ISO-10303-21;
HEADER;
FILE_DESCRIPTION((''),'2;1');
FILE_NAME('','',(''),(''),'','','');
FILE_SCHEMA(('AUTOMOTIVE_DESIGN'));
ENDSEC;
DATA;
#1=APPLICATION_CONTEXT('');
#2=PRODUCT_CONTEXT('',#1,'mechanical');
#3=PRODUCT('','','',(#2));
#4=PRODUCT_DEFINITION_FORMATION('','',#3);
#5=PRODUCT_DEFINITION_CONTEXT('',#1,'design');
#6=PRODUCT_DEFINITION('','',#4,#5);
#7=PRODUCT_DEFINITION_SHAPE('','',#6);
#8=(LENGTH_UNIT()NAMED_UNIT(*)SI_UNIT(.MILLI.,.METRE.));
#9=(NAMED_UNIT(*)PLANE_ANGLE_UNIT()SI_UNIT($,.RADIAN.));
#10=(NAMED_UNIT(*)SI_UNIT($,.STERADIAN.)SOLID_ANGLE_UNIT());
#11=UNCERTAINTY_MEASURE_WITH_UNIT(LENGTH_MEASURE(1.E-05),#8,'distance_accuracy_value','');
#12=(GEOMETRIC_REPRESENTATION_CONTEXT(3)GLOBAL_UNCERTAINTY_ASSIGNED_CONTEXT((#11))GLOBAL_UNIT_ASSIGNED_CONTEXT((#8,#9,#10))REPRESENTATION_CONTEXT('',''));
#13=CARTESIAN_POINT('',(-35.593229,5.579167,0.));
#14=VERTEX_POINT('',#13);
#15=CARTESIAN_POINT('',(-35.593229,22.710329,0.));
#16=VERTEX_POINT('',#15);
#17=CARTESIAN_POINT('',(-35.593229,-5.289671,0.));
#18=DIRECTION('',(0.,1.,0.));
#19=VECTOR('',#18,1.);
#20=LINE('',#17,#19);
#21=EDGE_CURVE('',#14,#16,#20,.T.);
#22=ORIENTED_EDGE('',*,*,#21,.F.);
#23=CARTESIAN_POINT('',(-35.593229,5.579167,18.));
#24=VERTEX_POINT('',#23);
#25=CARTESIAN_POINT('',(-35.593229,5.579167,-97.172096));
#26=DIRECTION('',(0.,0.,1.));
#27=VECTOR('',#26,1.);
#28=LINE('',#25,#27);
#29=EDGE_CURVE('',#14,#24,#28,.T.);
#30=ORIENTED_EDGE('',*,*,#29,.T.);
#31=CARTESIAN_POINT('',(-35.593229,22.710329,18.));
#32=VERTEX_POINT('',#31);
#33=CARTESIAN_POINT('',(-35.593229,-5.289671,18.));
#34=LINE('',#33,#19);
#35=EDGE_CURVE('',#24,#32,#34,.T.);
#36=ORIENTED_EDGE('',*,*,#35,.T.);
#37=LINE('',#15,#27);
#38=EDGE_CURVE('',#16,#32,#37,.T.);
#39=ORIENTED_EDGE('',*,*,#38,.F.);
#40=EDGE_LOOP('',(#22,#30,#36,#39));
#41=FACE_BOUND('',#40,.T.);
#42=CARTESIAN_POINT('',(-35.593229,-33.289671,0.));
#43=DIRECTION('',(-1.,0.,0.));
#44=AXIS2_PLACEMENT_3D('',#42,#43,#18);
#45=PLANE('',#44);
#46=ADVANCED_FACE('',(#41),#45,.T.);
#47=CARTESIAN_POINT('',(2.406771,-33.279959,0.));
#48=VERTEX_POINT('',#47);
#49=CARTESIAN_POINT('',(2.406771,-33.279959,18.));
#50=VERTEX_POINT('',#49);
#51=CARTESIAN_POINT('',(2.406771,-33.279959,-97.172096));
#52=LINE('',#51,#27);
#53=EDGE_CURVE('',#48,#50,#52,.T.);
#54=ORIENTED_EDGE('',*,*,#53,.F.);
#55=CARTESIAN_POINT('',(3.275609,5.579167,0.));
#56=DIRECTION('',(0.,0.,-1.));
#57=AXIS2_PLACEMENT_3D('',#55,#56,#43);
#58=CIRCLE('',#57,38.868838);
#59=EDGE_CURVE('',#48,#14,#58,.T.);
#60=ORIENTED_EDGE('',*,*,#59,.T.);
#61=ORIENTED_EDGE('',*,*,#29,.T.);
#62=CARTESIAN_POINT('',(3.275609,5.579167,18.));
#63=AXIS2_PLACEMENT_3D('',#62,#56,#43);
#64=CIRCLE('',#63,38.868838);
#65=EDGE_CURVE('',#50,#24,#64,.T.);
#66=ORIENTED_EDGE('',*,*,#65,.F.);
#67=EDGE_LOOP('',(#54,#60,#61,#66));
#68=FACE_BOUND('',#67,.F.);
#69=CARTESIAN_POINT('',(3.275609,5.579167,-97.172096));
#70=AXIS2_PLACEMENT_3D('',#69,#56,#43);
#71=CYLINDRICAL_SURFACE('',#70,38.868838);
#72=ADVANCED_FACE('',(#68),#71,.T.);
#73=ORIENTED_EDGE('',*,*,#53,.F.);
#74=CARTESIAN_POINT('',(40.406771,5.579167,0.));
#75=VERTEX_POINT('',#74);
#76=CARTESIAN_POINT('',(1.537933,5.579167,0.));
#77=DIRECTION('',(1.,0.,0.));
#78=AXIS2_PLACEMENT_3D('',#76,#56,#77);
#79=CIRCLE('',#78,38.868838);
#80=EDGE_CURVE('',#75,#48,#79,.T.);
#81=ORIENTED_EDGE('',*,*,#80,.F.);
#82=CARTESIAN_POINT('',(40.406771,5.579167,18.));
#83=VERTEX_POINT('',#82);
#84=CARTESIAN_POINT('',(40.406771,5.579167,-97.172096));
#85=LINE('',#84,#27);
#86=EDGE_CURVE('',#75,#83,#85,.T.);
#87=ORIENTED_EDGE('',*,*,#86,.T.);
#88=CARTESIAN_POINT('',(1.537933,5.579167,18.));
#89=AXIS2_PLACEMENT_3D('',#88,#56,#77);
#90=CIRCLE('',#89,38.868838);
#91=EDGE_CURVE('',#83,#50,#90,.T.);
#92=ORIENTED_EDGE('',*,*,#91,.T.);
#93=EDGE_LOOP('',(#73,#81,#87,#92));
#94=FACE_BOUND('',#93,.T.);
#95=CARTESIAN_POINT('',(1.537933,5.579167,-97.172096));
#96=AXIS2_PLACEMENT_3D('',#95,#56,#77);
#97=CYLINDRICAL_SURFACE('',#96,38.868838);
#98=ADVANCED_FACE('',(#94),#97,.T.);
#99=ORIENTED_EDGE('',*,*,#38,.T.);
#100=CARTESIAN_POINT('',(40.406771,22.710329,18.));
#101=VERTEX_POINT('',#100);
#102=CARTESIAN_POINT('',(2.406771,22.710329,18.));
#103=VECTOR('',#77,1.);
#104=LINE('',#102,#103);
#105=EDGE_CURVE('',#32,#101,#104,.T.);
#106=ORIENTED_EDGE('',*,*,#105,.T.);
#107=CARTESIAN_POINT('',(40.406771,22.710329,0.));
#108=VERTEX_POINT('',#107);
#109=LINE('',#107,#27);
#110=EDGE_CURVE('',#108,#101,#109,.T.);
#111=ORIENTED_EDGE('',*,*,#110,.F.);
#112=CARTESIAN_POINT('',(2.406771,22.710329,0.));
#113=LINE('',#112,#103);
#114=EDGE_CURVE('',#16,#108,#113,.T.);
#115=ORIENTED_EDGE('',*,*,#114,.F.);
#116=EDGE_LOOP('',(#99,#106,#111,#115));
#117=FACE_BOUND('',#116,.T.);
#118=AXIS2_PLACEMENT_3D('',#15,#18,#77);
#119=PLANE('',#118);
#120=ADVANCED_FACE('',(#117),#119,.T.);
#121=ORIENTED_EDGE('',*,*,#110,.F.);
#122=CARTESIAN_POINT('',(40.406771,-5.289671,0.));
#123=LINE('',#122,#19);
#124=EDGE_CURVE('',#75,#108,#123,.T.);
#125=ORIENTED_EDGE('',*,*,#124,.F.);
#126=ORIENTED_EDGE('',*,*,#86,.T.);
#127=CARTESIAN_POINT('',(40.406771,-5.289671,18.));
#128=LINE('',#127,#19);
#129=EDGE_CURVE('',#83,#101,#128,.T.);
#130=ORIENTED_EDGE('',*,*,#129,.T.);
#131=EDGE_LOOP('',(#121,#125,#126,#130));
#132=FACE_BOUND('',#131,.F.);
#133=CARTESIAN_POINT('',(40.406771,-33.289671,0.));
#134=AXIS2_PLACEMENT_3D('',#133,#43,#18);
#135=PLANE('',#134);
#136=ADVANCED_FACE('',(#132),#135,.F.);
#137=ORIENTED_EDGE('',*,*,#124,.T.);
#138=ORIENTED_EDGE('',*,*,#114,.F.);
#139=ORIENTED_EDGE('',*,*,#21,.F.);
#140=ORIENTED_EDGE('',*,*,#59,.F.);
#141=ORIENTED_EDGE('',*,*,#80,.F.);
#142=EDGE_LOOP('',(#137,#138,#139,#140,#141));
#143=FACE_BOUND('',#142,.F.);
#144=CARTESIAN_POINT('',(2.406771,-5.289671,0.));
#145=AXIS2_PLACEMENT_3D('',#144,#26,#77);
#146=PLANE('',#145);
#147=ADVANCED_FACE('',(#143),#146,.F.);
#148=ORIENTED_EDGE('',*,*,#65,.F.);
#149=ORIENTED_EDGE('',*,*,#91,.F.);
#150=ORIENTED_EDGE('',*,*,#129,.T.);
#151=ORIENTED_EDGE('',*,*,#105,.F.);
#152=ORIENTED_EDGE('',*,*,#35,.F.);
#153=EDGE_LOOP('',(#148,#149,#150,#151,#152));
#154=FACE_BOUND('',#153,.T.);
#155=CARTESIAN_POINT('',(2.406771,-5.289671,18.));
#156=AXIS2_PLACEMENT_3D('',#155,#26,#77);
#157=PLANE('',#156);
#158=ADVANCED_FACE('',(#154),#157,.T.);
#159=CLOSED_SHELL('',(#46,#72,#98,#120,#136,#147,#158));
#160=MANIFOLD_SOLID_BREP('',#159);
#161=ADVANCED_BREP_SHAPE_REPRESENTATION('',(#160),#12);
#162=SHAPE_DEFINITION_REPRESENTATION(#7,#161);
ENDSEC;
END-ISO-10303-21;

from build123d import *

# Parameters (mm, degrees)
F0_W        = 76
F0_H        = 56
F1_DEPTH    = 18
F2_T1_DEPTH = 212.344191771


# Not quite as in the source:
# - a fillet or chamfer that OpenCascade refuses, or shapes differently, is made with other operations: its cross-section is extruded or revolved along the edge and cut away or added


with BuildPart() as f1:
    # F0 (on Top) → F1 (new body)
    with BuildSketch(Plane.XY):
        with Locations((2.4067710042, -5.2896709442)):
            Rectangle(F0_W, F0_H)
    extrude(amount=F1_DEPTH)

    # F2: fillet of radius 38.8688383542 on 2 edges, made by hand

    # F2_s2 → F2_t1 (cut)
    with BuildSketch(Plane.XY.offset(-97.1720958855)):
        with BuildLine():
            ThreePointArc((-35.5932289958, 5.57916741), (-24.2088098187, -21.9052517671), (3.2756093584, -33.2896709442))
            Line((3.2756093584, -33.2896709442), (-35.5932289958, -33.2896709442))
            Line((-35.5932289958, -33.2896709442), (-35.5932289958, 5.57916741))
        make_face()
        with BuildLine():
            ThreePointArc((40.4067710042, 5.57916741), (29.0223518271, -21.9052517671), (1.53793265, -33.2896709442))
            Line((1.53793265, -33.2896709442), (40.4067710042, -33.2896709442))
            Line((40.4067710042, -33.2896709442), (40.4067710042, 5.57916741))
        make_face()
    extrude(amount=F2_T1_DEPTH, mode=Mode.SUBTRACT)


solid = f1.part
